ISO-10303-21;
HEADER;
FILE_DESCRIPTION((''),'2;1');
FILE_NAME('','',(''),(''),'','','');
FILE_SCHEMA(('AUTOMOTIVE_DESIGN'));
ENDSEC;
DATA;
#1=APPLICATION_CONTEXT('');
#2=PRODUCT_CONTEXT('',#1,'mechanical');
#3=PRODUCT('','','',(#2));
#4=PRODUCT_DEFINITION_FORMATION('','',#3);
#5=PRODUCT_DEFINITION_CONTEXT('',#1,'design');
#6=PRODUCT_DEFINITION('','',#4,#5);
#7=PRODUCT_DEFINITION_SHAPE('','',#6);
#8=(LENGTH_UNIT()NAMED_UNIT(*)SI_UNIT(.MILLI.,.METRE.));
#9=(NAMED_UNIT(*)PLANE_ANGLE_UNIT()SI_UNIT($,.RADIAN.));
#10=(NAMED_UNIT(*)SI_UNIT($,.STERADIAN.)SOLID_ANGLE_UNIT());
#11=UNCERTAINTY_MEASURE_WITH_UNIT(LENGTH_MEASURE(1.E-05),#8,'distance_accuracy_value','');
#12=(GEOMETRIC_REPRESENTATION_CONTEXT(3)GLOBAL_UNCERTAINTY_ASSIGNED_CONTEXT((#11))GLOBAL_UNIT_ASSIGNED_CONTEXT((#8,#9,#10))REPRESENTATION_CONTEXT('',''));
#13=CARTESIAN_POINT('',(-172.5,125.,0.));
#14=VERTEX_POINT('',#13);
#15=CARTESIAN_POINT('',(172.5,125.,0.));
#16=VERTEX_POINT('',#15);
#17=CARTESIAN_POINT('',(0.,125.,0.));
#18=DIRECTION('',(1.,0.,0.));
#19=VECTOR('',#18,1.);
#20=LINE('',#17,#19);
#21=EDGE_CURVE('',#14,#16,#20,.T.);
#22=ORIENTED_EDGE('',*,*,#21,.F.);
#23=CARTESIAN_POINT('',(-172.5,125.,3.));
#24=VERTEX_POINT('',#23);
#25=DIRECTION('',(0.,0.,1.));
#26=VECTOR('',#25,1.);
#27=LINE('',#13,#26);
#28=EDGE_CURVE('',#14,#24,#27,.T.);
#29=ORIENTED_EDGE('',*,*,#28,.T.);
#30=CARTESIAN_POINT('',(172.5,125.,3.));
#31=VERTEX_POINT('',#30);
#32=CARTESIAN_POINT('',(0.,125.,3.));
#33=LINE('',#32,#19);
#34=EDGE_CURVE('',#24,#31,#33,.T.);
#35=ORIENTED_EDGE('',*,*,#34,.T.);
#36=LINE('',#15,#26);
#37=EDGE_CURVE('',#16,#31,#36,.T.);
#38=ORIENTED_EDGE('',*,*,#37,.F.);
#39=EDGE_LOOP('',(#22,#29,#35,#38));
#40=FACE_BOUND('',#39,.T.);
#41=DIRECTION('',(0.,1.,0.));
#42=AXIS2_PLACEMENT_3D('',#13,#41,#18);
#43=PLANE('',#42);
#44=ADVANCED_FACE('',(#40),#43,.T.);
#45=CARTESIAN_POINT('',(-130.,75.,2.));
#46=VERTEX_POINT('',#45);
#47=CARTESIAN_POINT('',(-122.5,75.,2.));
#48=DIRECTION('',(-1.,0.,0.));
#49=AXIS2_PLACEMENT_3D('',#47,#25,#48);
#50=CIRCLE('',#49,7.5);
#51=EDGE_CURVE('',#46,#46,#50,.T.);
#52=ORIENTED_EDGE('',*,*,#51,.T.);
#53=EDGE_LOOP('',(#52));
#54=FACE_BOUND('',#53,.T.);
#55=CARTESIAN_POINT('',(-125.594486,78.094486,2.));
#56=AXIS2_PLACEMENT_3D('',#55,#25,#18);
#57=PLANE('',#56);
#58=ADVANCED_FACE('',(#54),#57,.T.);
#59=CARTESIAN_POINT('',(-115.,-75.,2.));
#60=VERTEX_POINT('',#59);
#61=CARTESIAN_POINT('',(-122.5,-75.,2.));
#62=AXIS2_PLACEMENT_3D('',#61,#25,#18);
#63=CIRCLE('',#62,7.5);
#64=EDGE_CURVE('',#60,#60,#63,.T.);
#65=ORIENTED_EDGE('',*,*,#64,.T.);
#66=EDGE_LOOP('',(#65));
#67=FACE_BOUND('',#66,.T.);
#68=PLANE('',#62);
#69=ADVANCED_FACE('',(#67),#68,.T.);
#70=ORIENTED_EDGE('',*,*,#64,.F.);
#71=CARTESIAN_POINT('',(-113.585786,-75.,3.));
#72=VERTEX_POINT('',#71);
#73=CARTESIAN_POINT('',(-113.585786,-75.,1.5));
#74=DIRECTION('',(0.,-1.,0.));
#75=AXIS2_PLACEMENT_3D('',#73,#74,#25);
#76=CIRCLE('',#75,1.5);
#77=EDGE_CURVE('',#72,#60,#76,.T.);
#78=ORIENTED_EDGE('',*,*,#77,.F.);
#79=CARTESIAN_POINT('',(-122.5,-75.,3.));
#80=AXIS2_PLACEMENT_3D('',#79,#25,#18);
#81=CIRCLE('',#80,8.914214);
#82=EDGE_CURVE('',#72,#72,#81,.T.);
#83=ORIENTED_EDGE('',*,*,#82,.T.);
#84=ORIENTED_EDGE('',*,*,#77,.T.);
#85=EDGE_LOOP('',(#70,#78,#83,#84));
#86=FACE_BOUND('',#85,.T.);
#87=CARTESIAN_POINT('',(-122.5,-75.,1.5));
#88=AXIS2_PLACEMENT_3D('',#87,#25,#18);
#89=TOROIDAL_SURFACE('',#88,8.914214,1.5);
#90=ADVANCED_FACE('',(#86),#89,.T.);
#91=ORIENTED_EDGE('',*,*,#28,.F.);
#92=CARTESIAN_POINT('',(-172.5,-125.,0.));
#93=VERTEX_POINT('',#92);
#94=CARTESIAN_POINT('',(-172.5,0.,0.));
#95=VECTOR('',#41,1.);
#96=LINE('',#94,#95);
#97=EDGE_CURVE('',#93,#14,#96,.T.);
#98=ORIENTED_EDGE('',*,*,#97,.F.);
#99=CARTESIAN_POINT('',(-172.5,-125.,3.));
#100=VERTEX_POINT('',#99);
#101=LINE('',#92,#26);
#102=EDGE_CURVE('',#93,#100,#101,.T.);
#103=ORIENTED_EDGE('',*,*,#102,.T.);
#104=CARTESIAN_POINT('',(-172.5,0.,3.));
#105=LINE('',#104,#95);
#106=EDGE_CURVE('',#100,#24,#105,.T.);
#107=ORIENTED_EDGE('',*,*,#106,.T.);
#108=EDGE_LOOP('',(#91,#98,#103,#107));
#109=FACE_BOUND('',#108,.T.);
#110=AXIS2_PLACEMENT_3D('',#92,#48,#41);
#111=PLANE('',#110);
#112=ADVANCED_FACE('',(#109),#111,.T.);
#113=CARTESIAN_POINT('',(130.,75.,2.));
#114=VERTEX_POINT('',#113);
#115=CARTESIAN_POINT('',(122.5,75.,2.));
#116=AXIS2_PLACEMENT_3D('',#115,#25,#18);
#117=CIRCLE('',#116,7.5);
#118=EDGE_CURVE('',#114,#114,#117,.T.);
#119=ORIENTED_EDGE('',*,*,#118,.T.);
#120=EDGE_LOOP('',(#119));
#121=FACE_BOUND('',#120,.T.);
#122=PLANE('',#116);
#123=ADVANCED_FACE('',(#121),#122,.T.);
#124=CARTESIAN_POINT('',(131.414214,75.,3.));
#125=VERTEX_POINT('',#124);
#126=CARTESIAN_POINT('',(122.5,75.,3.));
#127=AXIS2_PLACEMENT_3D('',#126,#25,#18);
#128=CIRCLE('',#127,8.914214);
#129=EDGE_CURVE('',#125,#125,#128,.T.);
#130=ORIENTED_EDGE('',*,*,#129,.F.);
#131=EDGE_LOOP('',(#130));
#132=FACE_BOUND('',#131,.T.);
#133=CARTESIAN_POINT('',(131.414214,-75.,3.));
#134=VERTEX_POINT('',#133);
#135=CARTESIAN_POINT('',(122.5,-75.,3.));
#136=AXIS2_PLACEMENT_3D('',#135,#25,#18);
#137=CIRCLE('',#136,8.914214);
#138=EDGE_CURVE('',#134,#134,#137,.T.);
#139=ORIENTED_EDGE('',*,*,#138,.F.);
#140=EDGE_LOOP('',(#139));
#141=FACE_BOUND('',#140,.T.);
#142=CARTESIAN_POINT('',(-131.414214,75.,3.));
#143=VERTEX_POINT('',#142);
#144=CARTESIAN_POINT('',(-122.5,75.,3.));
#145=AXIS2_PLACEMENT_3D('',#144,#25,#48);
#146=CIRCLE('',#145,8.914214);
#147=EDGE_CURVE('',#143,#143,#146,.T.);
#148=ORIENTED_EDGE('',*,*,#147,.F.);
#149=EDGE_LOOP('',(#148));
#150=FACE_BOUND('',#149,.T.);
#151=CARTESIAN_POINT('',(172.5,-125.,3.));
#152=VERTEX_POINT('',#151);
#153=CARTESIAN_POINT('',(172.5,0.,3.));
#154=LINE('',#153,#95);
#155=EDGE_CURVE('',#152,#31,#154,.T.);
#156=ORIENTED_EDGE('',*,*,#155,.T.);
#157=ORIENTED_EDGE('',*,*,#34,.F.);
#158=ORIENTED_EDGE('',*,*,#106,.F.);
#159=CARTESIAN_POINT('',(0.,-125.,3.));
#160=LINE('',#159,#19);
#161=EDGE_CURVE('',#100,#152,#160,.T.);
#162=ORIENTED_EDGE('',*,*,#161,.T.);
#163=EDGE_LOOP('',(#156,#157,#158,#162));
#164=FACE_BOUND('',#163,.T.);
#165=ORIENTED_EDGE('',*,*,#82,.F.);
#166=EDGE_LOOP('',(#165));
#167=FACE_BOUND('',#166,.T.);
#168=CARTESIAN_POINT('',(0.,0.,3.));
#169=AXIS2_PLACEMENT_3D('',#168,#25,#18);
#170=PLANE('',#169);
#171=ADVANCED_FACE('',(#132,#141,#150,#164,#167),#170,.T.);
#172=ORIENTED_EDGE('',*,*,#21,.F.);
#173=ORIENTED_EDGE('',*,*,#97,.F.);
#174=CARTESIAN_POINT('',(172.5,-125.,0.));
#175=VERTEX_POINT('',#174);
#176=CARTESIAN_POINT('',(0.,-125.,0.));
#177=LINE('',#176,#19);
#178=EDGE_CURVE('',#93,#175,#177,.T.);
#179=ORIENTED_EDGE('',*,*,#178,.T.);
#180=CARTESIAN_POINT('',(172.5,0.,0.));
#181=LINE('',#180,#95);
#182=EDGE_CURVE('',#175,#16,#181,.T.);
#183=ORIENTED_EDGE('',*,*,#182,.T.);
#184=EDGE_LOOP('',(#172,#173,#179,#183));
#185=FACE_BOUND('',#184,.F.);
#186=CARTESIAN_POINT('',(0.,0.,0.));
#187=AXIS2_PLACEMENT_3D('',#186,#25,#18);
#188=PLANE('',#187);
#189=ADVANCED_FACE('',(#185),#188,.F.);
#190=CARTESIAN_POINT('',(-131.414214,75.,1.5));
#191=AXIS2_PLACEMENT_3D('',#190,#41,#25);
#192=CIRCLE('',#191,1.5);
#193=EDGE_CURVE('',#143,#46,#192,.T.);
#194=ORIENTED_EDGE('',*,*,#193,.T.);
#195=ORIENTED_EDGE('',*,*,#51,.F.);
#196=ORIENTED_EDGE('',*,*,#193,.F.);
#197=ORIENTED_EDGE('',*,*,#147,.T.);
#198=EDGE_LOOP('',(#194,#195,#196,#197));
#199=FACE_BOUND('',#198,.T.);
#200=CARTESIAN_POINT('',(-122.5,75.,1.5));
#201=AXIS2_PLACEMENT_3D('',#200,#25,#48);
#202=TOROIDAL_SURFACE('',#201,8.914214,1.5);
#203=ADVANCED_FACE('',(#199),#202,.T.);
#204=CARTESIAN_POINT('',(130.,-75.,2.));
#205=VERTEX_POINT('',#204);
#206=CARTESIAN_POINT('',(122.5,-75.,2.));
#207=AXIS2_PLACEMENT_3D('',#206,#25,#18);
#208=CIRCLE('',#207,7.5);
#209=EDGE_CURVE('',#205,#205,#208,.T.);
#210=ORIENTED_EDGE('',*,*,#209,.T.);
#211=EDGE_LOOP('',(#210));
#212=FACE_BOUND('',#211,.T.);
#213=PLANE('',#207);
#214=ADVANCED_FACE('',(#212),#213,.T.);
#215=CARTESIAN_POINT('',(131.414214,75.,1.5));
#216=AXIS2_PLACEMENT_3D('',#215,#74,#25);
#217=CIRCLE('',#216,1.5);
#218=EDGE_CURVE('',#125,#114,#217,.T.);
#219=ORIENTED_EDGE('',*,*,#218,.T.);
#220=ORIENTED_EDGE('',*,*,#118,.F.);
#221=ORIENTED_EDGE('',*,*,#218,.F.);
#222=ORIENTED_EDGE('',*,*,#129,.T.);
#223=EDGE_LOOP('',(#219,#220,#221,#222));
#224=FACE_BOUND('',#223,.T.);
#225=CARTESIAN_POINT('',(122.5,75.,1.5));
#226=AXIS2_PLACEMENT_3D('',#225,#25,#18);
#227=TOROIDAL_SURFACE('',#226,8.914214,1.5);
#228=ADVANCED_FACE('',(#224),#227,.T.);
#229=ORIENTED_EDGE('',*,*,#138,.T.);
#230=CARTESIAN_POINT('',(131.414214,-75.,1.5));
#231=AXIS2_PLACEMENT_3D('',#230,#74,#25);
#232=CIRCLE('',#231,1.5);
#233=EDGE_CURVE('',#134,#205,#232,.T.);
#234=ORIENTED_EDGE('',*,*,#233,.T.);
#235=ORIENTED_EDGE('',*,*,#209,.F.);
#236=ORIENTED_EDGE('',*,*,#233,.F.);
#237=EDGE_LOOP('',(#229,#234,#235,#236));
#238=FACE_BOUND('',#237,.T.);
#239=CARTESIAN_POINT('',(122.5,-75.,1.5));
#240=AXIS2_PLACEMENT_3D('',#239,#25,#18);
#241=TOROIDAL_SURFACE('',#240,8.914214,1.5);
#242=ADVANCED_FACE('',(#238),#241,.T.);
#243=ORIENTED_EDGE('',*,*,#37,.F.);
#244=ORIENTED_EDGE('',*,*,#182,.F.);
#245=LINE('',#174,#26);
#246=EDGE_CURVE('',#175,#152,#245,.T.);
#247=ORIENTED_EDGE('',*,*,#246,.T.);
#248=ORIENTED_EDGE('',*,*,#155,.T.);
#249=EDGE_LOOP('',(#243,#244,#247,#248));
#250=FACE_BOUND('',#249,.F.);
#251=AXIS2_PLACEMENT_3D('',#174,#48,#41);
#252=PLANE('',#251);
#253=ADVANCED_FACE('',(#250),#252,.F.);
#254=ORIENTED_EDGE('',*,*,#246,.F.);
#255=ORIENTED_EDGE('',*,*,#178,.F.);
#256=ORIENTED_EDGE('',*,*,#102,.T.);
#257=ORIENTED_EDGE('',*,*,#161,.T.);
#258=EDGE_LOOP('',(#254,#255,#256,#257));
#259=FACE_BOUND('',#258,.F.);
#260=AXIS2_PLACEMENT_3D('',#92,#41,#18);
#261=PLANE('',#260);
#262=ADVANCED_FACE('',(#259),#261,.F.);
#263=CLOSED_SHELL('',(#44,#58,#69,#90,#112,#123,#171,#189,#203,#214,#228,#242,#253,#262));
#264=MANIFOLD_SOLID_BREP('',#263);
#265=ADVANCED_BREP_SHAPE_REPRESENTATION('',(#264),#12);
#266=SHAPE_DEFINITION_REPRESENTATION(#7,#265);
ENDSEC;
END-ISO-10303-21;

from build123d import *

# Parameters (mm, degrees)
F0_W     = 345
F0_H     = 250
F1_DEPTH = 3
F2_R     = 7.5
F3_DEPTH = 1


# Not quite as in the source:
# - a fillet or chamfer that OpenCascade refuses, or shapes differently, is made with other operations: its cross-section is extruded or revolved along the edge and cut away or added


with BuildPart() as f1:
    # F0 (on Top) → F1 (new body)
    with BuildSketch(Plane.XY):
        Rectangle(F0_W, F0_H)
    extrude(amount=F1_DEPTH)

    # F2 (on face) → F3 (cut)
    with BuildSketch(Plane.XY.offset(3)):
        with BuildLine():
            Line((-122.5, 75), (-122.5, 82.5))
            ThreePointArc((-122.5, 82.5), (-127.8033008589, 80.3033008589), (-130, 75))
            Line((-130, 75), (-122.5, 75))
        make_face()
        with BuildLine():
            ThreePointArc((-115, 75), (-117.1966991411, 80.3033008589), (-122.5, 82.5))
            Line((-122.5, 82.5), (-122.5, 75))
            Line((-122.5, 75), (-130, 75))
            ThreePointArc((-130, 75), (-122.5, 67.5), (-115, 75))
        make_face()
        with Locations((122.5, 75)):
            Circle(F2_R)
        with Locations((122.5, -75)):
            Circle(F2_R)
        with Locations((-122.5, -75)):
            Circle(F2_R)
    extrude(amount=-F3_DEPTH, mode=Mode.SUBTRACT)

    # F4: fillet of radius 1.5 on 4 edges, made by hand

    # F4_s1 → F4_t2 (revolve, cut)
    with BuildSketch(Plane.XZ.offset(-75)):
        with BuildLine():
            ThreePointArc((-131.4142135624, 3), (-130.5481881586, 2.7247448714), (-130, 2))
            Line((-130, 2), (-130, 3))
            Line((-130, 3), (-131.4142135624, 3))
        make_face()
    revolve(axis=Axis((-122.5, 75, 3), (0, 0, 1)), mode=Mode.SUBTRACT)

    # F4_s3 → F4_t4 (revolve, cut)
    with BuildSketch(Plane.XZ.offset(75)):
        with BuildLine():
            ThreePointArc((-113.5857864376, 3), (-114.4518118414, 2.7247448714), (-115, 2))
            Line((-115, 2), (-115, 3))
            Line((-115, 3), (-113.5857864376, 3))
        make_face()
    revolve(axis=Axis((-122.5, -75, 3), (0, 0, 1)), mode=Mode.SUBTRACT)

    # F4_s5 → F4_t6 (revolve, cut)
    with BuildSketch(Plane.XZ.offset(75)):
        with BuildLine():
            ThreePointArc((131.4142135624, 3), (130.5481881586, 2.7247448714), (130, 2))
            Line((130, 2), (130, 3))
            Line((130, 3), (131.4142135624, 3))
        make_face()
    revolve(axis=Axis((122.5, -75, 3), (0, 0, 1)), mode=Mode.SUBTRACT)

    # F4_s7 → F4_t8 (revolve, cut)
    with BuildSketch(Plane.XZ.offset(-75)):
        with BuildLine():
            ThreePointArc((131.4142135624, 3), (130.5481881586, 2.7247448714), (130, 2))
            Line((130, 2), (130, 3))
            Line((130, 3), (131.4142135624, 3))
        make_face()
    revolve(axis=Axis((122.5, 75, 3), (0, 0, 1)), mode=Mode.SUBTRACT)


solid = f1.part
